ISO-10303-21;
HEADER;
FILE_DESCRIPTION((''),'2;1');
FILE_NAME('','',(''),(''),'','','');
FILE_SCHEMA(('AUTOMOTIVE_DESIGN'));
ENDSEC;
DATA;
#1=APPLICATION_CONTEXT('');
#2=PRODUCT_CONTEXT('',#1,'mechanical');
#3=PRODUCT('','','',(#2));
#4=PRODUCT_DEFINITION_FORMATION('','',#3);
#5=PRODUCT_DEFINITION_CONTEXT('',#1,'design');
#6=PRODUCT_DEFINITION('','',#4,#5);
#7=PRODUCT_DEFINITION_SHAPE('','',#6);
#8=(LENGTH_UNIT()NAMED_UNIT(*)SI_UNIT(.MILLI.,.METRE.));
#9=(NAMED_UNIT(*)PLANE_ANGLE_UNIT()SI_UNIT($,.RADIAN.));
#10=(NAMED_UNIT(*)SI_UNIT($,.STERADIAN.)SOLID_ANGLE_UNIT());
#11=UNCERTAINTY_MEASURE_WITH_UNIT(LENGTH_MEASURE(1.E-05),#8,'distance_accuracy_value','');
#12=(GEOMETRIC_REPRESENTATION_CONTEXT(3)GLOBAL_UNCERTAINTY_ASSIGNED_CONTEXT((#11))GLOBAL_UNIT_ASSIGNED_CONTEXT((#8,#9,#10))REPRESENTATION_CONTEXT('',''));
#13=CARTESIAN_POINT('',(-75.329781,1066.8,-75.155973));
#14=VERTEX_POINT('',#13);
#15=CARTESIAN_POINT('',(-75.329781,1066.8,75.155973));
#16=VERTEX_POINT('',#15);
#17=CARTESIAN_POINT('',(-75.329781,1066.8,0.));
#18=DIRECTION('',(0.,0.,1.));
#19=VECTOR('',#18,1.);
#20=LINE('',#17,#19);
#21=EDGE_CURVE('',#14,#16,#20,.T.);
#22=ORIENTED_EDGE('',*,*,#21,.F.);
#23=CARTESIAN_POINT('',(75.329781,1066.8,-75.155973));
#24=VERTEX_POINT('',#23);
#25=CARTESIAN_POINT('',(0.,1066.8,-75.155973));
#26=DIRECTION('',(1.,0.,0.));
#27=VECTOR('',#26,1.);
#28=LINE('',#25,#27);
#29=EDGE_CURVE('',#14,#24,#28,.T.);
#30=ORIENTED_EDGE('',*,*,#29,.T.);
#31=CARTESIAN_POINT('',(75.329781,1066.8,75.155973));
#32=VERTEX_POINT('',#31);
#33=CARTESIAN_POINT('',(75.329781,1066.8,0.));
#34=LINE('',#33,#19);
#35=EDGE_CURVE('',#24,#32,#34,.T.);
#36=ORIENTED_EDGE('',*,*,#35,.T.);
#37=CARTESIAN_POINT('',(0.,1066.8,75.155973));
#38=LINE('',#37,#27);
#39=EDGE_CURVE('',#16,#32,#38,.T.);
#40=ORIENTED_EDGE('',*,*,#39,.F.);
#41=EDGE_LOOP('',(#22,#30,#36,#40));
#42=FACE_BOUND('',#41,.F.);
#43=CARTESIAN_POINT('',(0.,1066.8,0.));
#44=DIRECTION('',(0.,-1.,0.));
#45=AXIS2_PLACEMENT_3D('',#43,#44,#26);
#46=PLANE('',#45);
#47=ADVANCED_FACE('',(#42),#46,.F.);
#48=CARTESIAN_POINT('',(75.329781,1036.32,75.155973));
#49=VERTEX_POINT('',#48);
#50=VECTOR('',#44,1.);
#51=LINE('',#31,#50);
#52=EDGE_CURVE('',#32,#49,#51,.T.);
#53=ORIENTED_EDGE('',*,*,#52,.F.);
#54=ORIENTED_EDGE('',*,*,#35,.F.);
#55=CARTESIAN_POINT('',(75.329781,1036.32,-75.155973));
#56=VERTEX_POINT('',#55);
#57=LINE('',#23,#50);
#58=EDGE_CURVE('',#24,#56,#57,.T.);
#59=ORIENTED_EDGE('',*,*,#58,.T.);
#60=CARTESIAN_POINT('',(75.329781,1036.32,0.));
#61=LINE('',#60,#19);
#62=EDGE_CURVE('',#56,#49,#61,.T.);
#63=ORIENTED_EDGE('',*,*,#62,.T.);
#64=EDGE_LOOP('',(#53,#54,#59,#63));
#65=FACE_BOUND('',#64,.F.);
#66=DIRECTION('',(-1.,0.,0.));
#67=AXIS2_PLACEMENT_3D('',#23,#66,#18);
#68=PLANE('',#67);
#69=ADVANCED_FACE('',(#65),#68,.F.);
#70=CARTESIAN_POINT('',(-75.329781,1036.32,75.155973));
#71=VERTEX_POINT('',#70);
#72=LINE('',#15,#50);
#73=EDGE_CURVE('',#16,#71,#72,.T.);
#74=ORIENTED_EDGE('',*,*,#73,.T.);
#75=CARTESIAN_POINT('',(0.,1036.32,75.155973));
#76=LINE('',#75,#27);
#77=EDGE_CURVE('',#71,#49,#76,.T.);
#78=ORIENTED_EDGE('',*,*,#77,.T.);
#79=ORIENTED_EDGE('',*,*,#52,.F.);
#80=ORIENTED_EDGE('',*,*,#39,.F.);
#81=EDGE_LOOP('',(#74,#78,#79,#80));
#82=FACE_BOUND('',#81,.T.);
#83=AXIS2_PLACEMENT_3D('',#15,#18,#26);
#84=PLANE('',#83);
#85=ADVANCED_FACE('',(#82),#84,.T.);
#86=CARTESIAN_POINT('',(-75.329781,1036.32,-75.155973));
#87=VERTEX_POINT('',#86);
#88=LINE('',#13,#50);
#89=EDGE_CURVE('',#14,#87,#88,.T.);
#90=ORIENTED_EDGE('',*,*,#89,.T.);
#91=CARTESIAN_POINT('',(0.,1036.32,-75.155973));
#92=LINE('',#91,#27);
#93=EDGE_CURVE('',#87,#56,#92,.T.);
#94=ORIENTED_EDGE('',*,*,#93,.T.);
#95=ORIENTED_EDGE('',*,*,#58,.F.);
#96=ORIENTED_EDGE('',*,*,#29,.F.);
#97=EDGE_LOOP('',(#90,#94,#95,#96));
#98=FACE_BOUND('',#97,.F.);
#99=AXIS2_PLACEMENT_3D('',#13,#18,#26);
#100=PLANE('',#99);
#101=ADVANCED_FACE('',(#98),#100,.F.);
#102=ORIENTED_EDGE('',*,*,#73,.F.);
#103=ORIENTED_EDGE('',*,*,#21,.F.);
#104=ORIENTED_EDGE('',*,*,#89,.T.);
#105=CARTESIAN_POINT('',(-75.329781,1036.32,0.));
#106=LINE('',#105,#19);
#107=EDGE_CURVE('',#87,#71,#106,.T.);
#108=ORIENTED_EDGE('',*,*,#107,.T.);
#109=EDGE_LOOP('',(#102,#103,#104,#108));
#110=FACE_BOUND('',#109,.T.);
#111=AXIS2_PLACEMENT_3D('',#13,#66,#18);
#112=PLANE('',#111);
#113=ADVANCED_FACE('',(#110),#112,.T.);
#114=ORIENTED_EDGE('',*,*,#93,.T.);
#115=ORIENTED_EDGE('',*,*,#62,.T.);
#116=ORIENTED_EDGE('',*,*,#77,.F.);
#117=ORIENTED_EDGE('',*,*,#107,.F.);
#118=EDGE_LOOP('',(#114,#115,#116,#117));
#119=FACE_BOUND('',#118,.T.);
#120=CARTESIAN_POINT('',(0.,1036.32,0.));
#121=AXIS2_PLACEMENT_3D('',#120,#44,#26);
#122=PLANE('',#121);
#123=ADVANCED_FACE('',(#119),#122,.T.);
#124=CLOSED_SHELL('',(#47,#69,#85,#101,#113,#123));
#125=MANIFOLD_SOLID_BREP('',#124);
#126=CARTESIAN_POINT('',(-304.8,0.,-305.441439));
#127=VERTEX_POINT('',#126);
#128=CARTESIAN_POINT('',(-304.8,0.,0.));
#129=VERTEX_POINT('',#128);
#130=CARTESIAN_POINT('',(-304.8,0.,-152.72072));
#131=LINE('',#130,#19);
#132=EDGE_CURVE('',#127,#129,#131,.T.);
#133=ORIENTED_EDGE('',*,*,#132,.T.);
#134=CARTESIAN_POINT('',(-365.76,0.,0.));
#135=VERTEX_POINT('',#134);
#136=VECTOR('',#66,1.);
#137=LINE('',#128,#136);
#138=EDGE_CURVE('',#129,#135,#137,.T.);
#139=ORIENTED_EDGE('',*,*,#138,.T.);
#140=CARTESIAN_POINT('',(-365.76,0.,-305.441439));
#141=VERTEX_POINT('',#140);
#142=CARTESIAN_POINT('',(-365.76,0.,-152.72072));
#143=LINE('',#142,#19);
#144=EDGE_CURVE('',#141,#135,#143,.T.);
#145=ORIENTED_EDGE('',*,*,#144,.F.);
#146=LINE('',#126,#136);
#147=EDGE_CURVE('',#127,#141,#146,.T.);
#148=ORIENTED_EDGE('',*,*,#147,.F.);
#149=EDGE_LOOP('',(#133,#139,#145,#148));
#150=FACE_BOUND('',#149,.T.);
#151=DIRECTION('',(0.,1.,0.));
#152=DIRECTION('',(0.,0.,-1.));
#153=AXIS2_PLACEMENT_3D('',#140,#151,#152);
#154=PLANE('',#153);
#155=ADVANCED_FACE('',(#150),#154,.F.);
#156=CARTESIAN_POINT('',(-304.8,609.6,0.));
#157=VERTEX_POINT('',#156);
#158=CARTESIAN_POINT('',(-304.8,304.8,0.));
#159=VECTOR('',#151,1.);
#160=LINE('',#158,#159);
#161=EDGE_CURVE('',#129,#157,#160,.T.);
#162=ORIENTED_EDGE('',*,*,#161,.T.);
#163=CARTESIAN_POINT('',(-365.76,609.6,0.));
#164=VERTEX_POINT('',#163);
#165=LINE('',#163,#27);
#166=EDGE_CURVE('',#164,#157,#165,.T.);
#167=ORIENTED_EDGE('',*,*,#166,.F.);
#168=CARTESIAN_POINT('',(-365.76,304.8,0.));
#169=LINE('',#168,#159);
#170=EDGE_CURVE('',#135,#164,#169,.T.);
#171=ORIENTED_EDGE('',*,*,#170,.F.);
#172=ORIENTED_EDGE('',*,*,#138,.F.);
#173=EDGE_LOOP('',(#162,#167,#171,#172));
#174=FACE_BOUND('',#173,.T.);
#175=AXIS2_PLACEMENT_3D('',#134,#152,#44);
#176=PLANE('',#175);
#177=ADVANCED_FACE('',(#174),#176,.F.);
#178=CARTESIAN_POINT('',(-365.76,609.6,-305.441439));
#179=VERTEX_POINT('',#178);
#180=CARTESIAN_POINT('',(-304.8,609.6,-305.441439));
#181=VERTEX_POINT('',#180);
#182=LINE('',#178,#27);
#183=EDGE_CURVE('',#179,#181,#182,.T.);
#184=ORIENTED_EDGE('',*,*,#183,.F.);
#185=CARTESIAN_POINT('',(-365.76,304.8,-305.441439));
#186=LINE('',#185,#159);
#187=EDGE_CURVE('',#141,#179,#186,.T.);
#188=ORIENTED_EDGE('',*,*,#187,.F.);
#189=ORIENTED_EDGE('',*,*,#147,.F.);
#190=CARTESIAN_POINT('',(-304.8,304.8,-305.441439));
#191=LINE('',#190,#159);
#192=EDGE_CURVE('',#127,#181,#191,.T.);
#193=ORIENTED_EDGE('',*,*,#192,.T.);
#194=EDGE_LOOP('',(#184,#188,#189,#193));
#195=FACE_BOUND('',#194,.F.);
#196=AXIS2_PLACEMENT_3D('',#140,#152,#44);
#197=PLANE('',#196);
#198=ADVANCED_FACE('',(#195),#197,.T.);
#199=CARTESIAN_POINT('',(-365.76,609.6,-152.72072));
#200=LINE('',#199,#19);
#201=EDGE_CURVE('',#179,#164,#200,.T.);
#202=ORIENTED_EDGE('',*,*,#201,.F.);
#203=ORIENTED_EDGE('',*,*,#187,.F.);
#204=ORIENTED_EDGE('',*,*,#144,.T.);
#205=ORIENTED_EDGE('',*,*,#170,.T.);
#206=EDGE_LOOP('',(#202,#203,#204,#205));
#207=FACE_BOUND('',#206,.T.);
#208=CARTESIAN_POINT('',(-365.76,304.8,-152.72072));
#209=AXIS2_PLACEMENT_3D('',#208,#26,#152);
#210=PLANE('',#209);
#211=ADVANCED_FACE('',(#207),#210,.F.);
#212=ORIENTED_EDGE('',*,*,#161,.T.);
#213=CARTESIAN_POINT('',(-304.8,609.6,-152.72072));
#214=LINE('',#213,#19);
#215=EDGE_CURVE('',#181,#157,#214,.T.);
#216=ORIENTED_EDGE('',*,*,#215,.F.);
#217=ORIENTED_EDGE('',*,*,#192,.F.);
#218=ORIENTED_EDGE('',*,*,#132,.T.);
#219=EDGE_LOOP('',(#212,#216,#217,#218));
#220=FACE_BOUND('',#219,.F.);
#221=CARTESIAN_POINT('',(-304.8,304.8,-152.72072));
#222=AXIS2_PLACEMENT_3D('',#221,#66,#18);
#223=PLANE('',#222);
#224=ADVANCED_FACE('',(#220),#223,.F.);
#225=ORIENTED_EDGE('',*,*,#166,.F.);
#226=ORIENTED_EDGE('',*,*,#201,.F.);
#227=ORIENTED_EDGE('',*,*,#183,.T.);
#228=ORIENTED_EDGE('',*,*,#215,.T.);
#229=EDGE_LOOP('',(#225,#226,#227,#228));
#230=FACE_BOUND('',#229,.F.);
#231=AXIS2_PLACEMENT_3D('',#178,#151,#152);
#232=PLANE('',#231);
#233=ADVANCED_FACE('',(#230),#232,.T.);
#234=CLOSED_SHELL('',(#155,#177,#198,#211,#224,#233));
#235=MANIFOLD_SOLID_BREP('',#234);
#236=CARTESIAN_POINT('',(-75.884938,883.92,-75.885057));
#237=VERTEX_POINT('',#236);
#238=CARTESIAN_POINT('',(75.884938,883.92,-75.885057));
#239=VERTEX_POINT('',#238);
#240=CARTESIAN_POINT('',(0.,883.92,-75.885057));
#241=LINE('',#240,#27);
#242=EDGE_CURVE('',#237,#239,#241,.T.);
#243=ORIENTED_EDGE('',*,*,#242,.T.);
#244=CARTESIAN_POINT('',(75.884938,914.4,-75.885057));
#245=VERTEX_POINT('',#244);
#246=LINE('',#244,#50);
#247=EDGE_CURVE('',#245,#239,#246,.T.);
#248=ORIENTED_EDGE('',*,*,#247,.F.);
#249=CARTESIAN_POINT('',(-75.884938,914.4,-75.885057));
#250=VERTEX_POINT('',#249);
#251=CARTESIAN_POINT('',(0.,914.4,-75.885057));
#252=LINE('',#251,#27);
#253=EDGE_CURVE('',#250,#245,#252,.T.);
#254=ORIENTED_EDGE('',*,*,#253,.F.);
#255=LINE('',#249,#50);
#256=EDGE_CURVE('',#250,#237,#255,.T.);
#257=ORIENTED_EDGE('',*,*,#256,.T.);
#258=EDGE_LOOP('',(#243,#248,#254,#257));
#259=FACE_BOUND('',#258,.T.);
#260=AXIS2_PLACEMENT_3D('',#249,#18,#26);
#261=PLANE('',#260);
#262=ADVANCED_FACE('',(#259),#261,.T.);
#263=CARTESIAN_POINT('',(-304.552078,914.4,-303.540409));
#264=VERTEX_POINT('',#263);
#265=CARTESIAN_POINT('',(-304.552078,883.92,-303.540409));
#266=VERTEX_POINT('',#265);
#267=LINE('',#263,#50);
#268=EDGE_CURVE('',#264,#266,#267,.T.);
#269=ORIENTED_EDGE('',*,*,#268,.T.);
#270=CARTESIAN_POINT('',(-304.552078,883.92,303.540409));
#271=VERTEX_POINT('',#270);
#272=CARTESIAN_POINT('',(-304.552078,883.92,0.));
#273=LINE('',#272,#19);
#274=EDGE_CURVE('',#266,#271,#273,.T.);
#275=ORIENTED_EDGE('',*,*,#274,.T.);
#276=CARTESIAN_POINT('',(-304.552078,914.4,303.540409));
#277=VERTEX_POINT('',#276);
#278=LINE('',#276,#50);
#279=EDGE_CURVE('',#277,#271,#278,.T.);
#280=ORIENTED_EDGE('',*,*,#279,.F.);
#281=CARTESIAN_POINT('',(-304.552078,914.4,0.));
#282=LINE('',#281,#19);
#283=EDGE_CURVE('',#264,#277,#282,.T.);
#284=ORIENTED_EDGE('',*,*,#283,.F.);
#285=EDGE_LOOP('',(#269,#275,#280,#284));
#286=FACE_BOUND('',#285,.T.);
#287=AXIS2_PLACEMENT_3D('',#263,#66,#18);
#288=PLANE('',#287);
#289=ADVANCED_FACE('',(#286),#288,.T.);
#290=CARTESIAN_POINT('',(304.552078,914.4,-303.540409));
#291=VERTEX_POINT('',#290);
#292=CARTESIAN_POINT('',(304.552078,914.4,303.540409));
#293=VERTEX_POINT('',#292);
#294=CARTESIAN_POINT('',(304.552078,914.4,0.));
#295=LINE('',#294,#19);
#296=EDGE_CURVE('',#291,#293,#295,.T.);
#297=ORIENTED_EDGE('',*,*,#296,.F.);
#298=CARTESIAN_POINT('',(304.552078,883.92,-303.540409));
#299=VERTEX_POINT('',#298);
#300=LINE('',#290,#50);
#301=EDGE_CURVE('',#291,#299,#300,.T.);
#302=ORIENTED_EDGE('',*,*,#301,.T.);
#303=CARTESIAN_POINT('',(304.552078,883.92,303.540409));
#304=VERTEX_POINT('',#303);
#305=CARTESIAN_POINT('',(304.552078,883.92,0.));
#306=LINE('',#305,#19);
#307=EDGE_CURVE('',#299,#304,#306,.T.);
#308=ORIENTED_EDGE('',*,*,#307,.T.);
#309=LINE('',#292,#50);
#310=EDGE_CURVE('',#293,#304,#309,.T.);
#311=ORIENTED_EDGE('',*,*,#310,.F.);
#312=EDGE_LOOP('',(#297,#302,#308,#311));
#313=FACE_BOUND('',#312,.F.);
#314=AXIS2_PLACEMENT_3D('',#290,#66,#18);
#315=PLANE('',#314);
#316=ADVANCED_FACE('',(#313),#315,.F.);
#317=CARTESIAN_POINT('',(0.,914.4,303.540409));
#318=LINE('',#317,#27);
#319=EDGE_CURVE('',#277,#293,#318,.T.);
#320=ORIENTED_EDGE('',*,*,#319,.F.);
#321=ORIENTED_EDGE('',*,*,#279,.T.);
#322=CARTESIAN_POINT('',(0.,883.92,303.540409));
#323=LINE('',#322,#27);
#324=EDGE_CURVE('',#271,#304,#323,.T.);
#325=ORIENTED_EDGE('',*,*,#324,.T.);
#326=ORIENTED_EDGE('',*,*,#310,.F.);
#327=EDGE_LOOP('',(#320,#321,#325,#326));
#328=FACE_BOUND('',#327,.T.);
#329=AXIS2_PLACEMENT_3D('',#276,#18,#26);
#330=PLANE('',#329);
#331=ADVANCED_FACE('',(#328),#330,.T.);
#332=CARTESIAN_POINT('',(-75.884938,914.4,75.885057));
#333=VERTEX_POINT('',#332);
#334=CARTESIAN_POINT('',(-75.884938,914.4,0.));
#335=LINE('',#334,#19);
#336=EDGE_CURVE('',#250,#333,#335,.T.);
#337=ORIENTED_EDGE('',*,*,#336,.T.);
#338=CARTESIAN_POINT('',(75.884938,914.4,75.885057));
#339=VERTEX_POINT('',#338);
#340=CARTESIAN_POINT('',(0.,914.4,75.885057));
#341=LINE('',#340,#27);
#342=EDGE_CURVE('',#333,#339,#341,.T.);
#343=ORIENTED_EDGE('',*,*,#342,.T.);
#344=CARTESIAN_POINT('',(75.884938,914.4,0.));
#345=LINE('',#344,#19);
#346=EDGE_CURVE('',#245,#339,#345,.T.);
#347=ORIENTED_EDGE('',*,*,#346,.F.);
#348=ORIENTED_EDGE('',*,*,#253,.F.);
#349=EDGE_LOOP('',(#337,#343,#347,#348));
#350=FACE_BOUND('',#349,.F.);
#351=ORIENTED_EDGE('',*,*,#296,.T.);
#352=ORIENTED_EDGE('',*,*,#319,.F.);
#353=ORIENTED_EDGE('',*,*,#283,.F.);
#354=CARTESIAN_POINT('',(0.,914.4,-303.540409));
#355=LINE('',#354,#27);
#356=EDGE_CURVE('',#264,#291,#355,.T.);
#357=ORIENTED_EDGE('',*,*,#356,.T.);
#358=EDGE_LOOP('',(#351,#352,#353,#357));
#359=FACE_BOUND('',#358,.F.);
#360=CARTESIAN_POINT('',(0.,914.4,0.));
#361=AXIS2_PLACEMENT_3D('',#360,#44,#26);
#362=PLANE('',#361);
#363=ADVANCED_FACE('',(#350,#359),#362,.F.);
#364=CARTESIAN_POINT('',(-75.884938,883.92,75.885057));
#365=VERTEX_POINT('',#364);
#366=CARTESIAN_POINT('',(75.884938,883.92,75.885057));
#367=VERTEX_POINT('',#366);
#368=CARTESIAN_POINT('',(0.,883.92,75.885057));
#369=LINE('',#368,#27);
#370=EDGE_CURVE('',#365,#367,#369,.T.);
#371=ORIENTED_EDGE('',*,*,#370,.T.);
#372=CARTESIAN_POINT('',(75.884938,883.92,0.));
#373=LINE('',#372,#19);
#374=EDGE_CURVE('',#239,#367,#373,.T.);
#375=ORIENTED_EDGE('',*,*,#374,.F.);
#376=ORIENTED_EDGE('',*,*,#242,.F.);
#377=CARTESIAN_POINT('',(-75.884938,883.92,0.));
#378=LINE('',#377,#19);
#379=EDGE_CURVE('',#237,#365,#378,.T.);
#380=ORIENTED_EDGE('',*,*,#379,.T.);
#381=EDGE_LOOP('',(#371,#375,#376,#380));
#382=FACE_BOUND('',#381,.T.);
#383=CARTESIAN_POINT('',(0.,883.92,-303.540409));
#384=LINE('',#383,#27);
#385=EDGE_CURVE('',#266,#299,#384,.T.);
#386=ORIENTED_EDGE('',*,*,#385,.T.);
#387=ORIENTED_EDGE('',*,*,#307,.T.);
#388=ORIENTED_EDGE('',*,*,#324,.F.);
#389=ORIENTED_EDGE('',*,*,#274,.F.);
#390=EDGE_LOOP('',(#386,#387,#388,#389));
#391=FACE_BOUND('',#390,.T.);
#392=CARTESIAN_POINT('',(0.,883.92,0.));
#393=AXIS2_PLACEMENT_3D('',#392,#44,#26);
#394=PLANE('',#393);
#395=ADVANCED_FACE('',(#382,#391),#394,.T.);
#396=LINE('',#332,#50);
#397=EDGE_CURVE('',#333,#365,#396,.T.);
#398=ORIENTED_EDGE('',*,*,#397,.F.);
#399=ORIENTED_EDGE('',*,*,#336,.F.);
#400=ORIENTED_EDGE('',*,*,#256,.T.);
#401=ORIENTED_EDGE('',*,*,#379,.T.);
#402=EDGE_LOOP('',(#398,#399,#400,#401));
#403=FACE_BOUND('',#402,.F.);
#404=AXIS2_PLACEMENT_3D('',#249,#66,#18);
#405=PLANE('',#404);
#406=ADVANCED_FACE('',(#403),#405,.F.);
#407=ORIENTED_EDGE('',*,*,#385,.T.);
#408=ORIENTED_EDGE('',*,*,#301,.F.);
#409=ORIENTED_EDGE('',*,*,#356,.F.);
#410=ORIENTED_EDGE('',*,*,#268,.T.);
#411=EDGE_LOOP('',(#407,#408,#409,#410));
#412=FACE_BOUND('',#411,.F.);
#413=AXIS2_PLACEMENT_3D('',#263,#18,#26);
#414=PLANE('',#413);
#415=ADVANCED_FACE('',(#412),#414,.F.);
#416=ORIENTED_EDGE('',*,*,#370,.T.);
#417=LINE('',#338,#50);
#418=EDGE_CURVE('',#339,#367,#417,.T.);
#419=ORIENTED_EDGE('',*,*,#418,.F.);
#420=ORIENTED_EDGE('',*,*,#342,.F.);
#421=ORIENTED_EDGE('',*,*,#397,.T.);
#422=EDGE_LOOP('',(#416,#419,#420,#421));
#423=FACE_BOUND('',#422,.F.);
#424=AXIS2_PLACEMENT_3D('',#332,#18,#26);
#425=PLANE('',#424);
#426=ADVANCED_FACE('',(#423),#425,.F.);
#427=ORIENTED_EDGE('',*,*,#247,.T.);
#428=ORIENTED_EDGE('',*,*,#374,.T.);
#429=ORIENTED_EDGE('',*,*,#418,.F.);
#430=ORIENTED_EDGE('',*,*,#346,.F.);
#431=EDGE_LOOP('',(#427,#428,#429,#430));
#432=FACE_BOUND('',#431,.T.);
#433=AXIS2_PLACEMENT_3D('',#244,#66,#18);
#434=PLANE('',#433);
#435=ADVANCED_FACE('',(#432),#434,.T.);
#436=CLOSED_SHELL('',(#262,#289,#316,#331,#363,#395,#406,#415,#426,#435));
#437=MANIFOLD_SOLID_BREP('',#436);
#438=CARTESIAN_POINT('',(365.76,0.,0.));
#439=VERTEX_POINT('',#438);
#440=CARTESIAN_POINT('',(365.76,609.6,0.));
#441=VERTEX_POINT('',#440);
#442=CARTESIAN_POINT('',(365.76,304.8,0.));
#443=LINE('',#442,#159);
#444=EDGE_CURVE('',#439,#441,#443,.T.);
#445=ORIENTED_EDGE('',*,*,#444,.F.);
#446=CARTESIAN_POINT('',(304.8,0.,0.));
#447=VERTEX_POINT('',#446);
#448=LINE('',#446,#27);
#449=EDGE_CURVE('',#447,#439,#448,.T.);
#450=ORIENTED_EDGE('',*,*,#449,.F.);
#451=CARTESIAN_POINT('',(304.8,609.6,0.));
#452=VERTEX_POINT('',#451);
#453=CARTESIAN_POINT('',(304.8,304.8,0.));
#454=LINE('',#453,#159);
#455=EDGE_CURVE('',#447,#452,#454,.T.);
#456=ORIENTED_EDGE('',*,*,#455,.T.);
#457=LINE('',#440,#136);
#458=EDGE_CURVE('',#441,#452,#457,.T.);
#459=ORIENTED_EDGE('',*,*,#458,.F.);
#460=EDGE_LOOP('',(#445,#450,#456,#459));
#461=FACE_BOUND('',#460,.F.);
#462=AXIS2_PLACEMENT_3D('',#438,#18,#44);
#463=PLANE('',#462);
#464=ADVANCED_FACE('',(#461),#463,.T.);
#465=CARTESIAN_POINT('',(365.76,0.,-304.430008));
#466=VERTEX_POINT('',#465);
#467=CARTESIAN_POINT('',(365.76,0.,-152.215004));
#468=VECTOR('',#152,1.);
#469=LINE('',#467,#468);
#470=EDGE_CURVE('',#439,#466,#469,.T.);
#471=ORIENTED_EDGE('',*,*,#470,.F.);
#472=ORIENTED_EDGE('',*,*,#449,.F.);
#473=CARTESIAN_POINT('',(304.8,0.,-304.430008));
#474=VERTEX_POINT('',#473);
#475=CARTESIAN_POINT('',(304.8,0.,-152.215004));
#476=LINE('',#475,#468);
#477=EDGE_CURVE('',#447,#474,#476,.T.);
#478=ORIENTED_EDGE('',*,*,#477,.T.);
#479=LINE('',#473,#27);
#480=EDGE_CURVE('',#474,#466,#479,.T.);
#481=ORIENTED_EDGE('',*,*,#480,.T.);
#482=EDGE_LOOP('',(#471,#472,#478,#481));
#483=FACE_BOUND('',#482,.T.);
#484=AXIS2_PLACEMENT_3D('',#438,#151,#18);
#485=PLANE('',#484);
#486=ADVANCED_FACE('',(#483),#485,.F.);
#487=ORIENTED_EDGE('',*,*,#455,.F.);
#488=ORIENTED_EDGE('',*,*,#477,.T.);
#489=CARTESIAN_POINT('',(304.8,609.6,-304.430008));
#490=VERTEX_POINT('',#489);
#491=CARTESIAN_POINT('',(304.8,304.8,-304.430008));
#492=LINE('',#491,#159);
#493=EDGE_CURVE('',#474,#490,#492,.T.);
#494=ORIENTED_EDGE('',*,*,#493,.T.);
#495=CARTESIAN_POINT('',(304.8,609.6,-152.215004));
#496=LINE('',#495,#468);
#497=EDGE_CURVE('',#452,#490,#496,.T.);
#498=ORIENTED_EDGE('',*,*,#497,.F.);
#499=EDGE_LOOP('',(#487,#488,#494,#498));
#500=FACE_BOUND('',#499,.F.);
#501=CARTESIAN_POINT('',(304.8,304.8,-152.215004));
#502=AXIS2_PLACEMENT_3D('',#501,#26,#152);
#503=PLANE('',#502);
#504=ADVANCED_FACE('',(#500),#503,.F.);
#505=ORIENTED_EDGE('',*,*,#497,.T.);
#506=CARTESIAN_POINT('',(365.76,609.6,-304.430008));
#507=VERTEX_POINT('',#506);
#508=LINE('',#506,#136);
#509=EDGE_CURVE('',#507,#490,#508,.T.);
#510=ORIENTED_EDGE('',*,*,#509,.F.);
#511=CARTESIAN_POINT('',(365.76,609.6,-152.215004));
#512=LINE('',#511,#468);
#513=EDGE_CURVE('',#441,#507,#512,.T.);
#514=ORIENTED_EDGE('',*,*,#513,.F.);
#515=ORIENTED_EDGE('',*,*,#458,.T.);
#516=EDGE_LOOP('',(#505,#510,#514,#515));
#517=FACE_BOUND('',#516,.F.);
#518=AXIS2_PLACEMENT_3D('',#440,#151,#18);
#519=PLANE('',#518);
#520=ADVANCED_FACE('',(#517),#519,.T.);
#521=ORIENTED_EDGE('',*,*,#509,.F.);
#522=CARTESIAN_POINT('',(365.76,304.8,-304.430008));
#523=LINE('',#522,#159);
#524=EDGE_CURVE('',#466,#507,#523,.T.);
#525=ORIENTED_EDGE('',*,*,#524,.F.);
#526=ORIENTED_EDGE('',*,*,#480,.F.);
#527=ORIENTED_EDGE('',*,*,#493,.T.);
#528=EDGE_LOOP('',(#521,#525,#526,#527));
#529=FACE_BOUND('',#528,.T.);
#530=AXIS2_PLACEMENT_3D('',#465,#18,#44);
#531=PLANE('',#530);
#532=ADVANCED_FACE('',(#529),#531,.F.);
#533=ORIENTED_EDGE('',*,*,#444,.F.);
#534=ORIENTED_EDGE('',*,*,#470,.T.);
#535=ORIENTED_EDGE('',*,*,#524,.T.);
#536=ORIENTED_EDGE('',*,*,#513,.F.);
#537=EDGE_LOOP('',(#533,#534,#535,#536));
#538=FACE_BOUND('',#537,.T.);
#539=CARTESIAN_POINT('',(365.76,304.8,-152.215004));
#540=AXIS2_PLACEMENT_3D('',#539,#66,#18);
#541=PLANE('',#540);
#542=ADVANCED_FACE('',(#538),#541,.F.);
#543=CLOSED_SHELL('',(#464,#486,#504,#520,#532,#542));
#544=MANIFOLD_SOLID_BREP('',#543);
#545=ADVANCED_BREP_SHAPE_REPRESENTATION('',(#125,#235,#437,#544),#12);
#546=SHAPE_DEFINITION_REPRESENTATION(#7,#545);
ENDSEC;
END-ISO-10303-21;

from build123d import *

# Parameters (mm, degrees)
F1_W      = 609.1041564941
F1_H      = 607.0808172226
F1_W_2    = 151.7698764801
F1_H_2    = 151.7701148987
F2_DEPTH  = 30.48
F7_E6_W   = 305.4414391518
F7_E6_H   = 609.6
F8_DEPTH  = 30.48
F7_E7_W   = 304.4300079346
F7_E7_H   = 609.6
F9_DEPTH  = 30.48
F12_W     = 150.6595611572
F12_H     = 150.3119468689
F13_DEPTH = 30.48


# Not quite as in the source:
# - a feature of the source that left no trace in its solid (it failed there, or was rolled back) is left out
# - a pattern or mirror of a feature is missing from the dataset's text; its kind, count and spacing are read off the source's solid
# - the program builds the solid bodies; features that only make, move or delete a surface that nothing else refers to are left out


with BuildPart() as f2:
    # F1 (on offset) → F2 (new body)
    with BuildSketch(Plane.XZ.offset(-914.4)):
        Rectangle(F1_W, F1_H)
        Rectangle(F1_W_2, F1_H_2, mode=Mode.SUBTRACT)
    extrude(amount=F2_DEPTH)


with BuildPart() as f8:
    # F7_E6 (on explicit) → F8 (new body)
    with BuildSketch(Plane(origin=(-304.8, 0, -305.4414391518), x_dir=(0, 0, 1), z_dir=(-1, 0, 0))):
        with Locations((152.7207195759, 304.8)):
            Rectangle(F7_E6_W, F7_E6_H)
    extrude(amount=F8_DEPTH)

    # F8_copies: F8 across plane


with BuildPart() as f8_1:
    add(f8.part)
    add(f8.part.mirror(Plane(origin=(-335.28, 0, 0), x_dir=(0, 0, -1), z_dir=(-1, 0, 0))))


with BuildPart() as f9:
    # F7_E7 (on explicit) → F9 (new body)
    with BuildSketch(Plane(origin=(304.8, 0, 0), x_dir=(0, 0, -1), z_dir=(1, 0, 0))):
        with Locations((152.2150039673, 304.8)):
            Rectangle(F7_E7_W, F7_E7_H)
    extrude(amount=F9_DEPTH)

    # F9_copies: F9 across plane


with BuildPart() as f9_1:
    add(f9.part)
    add(f9.part.mirror(Plane(origin=(335.28, 0, 0), x_dir=(0, 0, 1), z_dir=(1, 0, 0))))


with BuildPart() as f13:
    # F12 (on offset) → F13 (new body)
    with BuildSketch(Plane.XZ.offset(-1066.8)):
        Rectangle(F12_W, F12_H)
    extrude(amount=F13_DEPTH)


solid = Compound([f2.part, f8_1.part, f9_1.part, f13.part])
